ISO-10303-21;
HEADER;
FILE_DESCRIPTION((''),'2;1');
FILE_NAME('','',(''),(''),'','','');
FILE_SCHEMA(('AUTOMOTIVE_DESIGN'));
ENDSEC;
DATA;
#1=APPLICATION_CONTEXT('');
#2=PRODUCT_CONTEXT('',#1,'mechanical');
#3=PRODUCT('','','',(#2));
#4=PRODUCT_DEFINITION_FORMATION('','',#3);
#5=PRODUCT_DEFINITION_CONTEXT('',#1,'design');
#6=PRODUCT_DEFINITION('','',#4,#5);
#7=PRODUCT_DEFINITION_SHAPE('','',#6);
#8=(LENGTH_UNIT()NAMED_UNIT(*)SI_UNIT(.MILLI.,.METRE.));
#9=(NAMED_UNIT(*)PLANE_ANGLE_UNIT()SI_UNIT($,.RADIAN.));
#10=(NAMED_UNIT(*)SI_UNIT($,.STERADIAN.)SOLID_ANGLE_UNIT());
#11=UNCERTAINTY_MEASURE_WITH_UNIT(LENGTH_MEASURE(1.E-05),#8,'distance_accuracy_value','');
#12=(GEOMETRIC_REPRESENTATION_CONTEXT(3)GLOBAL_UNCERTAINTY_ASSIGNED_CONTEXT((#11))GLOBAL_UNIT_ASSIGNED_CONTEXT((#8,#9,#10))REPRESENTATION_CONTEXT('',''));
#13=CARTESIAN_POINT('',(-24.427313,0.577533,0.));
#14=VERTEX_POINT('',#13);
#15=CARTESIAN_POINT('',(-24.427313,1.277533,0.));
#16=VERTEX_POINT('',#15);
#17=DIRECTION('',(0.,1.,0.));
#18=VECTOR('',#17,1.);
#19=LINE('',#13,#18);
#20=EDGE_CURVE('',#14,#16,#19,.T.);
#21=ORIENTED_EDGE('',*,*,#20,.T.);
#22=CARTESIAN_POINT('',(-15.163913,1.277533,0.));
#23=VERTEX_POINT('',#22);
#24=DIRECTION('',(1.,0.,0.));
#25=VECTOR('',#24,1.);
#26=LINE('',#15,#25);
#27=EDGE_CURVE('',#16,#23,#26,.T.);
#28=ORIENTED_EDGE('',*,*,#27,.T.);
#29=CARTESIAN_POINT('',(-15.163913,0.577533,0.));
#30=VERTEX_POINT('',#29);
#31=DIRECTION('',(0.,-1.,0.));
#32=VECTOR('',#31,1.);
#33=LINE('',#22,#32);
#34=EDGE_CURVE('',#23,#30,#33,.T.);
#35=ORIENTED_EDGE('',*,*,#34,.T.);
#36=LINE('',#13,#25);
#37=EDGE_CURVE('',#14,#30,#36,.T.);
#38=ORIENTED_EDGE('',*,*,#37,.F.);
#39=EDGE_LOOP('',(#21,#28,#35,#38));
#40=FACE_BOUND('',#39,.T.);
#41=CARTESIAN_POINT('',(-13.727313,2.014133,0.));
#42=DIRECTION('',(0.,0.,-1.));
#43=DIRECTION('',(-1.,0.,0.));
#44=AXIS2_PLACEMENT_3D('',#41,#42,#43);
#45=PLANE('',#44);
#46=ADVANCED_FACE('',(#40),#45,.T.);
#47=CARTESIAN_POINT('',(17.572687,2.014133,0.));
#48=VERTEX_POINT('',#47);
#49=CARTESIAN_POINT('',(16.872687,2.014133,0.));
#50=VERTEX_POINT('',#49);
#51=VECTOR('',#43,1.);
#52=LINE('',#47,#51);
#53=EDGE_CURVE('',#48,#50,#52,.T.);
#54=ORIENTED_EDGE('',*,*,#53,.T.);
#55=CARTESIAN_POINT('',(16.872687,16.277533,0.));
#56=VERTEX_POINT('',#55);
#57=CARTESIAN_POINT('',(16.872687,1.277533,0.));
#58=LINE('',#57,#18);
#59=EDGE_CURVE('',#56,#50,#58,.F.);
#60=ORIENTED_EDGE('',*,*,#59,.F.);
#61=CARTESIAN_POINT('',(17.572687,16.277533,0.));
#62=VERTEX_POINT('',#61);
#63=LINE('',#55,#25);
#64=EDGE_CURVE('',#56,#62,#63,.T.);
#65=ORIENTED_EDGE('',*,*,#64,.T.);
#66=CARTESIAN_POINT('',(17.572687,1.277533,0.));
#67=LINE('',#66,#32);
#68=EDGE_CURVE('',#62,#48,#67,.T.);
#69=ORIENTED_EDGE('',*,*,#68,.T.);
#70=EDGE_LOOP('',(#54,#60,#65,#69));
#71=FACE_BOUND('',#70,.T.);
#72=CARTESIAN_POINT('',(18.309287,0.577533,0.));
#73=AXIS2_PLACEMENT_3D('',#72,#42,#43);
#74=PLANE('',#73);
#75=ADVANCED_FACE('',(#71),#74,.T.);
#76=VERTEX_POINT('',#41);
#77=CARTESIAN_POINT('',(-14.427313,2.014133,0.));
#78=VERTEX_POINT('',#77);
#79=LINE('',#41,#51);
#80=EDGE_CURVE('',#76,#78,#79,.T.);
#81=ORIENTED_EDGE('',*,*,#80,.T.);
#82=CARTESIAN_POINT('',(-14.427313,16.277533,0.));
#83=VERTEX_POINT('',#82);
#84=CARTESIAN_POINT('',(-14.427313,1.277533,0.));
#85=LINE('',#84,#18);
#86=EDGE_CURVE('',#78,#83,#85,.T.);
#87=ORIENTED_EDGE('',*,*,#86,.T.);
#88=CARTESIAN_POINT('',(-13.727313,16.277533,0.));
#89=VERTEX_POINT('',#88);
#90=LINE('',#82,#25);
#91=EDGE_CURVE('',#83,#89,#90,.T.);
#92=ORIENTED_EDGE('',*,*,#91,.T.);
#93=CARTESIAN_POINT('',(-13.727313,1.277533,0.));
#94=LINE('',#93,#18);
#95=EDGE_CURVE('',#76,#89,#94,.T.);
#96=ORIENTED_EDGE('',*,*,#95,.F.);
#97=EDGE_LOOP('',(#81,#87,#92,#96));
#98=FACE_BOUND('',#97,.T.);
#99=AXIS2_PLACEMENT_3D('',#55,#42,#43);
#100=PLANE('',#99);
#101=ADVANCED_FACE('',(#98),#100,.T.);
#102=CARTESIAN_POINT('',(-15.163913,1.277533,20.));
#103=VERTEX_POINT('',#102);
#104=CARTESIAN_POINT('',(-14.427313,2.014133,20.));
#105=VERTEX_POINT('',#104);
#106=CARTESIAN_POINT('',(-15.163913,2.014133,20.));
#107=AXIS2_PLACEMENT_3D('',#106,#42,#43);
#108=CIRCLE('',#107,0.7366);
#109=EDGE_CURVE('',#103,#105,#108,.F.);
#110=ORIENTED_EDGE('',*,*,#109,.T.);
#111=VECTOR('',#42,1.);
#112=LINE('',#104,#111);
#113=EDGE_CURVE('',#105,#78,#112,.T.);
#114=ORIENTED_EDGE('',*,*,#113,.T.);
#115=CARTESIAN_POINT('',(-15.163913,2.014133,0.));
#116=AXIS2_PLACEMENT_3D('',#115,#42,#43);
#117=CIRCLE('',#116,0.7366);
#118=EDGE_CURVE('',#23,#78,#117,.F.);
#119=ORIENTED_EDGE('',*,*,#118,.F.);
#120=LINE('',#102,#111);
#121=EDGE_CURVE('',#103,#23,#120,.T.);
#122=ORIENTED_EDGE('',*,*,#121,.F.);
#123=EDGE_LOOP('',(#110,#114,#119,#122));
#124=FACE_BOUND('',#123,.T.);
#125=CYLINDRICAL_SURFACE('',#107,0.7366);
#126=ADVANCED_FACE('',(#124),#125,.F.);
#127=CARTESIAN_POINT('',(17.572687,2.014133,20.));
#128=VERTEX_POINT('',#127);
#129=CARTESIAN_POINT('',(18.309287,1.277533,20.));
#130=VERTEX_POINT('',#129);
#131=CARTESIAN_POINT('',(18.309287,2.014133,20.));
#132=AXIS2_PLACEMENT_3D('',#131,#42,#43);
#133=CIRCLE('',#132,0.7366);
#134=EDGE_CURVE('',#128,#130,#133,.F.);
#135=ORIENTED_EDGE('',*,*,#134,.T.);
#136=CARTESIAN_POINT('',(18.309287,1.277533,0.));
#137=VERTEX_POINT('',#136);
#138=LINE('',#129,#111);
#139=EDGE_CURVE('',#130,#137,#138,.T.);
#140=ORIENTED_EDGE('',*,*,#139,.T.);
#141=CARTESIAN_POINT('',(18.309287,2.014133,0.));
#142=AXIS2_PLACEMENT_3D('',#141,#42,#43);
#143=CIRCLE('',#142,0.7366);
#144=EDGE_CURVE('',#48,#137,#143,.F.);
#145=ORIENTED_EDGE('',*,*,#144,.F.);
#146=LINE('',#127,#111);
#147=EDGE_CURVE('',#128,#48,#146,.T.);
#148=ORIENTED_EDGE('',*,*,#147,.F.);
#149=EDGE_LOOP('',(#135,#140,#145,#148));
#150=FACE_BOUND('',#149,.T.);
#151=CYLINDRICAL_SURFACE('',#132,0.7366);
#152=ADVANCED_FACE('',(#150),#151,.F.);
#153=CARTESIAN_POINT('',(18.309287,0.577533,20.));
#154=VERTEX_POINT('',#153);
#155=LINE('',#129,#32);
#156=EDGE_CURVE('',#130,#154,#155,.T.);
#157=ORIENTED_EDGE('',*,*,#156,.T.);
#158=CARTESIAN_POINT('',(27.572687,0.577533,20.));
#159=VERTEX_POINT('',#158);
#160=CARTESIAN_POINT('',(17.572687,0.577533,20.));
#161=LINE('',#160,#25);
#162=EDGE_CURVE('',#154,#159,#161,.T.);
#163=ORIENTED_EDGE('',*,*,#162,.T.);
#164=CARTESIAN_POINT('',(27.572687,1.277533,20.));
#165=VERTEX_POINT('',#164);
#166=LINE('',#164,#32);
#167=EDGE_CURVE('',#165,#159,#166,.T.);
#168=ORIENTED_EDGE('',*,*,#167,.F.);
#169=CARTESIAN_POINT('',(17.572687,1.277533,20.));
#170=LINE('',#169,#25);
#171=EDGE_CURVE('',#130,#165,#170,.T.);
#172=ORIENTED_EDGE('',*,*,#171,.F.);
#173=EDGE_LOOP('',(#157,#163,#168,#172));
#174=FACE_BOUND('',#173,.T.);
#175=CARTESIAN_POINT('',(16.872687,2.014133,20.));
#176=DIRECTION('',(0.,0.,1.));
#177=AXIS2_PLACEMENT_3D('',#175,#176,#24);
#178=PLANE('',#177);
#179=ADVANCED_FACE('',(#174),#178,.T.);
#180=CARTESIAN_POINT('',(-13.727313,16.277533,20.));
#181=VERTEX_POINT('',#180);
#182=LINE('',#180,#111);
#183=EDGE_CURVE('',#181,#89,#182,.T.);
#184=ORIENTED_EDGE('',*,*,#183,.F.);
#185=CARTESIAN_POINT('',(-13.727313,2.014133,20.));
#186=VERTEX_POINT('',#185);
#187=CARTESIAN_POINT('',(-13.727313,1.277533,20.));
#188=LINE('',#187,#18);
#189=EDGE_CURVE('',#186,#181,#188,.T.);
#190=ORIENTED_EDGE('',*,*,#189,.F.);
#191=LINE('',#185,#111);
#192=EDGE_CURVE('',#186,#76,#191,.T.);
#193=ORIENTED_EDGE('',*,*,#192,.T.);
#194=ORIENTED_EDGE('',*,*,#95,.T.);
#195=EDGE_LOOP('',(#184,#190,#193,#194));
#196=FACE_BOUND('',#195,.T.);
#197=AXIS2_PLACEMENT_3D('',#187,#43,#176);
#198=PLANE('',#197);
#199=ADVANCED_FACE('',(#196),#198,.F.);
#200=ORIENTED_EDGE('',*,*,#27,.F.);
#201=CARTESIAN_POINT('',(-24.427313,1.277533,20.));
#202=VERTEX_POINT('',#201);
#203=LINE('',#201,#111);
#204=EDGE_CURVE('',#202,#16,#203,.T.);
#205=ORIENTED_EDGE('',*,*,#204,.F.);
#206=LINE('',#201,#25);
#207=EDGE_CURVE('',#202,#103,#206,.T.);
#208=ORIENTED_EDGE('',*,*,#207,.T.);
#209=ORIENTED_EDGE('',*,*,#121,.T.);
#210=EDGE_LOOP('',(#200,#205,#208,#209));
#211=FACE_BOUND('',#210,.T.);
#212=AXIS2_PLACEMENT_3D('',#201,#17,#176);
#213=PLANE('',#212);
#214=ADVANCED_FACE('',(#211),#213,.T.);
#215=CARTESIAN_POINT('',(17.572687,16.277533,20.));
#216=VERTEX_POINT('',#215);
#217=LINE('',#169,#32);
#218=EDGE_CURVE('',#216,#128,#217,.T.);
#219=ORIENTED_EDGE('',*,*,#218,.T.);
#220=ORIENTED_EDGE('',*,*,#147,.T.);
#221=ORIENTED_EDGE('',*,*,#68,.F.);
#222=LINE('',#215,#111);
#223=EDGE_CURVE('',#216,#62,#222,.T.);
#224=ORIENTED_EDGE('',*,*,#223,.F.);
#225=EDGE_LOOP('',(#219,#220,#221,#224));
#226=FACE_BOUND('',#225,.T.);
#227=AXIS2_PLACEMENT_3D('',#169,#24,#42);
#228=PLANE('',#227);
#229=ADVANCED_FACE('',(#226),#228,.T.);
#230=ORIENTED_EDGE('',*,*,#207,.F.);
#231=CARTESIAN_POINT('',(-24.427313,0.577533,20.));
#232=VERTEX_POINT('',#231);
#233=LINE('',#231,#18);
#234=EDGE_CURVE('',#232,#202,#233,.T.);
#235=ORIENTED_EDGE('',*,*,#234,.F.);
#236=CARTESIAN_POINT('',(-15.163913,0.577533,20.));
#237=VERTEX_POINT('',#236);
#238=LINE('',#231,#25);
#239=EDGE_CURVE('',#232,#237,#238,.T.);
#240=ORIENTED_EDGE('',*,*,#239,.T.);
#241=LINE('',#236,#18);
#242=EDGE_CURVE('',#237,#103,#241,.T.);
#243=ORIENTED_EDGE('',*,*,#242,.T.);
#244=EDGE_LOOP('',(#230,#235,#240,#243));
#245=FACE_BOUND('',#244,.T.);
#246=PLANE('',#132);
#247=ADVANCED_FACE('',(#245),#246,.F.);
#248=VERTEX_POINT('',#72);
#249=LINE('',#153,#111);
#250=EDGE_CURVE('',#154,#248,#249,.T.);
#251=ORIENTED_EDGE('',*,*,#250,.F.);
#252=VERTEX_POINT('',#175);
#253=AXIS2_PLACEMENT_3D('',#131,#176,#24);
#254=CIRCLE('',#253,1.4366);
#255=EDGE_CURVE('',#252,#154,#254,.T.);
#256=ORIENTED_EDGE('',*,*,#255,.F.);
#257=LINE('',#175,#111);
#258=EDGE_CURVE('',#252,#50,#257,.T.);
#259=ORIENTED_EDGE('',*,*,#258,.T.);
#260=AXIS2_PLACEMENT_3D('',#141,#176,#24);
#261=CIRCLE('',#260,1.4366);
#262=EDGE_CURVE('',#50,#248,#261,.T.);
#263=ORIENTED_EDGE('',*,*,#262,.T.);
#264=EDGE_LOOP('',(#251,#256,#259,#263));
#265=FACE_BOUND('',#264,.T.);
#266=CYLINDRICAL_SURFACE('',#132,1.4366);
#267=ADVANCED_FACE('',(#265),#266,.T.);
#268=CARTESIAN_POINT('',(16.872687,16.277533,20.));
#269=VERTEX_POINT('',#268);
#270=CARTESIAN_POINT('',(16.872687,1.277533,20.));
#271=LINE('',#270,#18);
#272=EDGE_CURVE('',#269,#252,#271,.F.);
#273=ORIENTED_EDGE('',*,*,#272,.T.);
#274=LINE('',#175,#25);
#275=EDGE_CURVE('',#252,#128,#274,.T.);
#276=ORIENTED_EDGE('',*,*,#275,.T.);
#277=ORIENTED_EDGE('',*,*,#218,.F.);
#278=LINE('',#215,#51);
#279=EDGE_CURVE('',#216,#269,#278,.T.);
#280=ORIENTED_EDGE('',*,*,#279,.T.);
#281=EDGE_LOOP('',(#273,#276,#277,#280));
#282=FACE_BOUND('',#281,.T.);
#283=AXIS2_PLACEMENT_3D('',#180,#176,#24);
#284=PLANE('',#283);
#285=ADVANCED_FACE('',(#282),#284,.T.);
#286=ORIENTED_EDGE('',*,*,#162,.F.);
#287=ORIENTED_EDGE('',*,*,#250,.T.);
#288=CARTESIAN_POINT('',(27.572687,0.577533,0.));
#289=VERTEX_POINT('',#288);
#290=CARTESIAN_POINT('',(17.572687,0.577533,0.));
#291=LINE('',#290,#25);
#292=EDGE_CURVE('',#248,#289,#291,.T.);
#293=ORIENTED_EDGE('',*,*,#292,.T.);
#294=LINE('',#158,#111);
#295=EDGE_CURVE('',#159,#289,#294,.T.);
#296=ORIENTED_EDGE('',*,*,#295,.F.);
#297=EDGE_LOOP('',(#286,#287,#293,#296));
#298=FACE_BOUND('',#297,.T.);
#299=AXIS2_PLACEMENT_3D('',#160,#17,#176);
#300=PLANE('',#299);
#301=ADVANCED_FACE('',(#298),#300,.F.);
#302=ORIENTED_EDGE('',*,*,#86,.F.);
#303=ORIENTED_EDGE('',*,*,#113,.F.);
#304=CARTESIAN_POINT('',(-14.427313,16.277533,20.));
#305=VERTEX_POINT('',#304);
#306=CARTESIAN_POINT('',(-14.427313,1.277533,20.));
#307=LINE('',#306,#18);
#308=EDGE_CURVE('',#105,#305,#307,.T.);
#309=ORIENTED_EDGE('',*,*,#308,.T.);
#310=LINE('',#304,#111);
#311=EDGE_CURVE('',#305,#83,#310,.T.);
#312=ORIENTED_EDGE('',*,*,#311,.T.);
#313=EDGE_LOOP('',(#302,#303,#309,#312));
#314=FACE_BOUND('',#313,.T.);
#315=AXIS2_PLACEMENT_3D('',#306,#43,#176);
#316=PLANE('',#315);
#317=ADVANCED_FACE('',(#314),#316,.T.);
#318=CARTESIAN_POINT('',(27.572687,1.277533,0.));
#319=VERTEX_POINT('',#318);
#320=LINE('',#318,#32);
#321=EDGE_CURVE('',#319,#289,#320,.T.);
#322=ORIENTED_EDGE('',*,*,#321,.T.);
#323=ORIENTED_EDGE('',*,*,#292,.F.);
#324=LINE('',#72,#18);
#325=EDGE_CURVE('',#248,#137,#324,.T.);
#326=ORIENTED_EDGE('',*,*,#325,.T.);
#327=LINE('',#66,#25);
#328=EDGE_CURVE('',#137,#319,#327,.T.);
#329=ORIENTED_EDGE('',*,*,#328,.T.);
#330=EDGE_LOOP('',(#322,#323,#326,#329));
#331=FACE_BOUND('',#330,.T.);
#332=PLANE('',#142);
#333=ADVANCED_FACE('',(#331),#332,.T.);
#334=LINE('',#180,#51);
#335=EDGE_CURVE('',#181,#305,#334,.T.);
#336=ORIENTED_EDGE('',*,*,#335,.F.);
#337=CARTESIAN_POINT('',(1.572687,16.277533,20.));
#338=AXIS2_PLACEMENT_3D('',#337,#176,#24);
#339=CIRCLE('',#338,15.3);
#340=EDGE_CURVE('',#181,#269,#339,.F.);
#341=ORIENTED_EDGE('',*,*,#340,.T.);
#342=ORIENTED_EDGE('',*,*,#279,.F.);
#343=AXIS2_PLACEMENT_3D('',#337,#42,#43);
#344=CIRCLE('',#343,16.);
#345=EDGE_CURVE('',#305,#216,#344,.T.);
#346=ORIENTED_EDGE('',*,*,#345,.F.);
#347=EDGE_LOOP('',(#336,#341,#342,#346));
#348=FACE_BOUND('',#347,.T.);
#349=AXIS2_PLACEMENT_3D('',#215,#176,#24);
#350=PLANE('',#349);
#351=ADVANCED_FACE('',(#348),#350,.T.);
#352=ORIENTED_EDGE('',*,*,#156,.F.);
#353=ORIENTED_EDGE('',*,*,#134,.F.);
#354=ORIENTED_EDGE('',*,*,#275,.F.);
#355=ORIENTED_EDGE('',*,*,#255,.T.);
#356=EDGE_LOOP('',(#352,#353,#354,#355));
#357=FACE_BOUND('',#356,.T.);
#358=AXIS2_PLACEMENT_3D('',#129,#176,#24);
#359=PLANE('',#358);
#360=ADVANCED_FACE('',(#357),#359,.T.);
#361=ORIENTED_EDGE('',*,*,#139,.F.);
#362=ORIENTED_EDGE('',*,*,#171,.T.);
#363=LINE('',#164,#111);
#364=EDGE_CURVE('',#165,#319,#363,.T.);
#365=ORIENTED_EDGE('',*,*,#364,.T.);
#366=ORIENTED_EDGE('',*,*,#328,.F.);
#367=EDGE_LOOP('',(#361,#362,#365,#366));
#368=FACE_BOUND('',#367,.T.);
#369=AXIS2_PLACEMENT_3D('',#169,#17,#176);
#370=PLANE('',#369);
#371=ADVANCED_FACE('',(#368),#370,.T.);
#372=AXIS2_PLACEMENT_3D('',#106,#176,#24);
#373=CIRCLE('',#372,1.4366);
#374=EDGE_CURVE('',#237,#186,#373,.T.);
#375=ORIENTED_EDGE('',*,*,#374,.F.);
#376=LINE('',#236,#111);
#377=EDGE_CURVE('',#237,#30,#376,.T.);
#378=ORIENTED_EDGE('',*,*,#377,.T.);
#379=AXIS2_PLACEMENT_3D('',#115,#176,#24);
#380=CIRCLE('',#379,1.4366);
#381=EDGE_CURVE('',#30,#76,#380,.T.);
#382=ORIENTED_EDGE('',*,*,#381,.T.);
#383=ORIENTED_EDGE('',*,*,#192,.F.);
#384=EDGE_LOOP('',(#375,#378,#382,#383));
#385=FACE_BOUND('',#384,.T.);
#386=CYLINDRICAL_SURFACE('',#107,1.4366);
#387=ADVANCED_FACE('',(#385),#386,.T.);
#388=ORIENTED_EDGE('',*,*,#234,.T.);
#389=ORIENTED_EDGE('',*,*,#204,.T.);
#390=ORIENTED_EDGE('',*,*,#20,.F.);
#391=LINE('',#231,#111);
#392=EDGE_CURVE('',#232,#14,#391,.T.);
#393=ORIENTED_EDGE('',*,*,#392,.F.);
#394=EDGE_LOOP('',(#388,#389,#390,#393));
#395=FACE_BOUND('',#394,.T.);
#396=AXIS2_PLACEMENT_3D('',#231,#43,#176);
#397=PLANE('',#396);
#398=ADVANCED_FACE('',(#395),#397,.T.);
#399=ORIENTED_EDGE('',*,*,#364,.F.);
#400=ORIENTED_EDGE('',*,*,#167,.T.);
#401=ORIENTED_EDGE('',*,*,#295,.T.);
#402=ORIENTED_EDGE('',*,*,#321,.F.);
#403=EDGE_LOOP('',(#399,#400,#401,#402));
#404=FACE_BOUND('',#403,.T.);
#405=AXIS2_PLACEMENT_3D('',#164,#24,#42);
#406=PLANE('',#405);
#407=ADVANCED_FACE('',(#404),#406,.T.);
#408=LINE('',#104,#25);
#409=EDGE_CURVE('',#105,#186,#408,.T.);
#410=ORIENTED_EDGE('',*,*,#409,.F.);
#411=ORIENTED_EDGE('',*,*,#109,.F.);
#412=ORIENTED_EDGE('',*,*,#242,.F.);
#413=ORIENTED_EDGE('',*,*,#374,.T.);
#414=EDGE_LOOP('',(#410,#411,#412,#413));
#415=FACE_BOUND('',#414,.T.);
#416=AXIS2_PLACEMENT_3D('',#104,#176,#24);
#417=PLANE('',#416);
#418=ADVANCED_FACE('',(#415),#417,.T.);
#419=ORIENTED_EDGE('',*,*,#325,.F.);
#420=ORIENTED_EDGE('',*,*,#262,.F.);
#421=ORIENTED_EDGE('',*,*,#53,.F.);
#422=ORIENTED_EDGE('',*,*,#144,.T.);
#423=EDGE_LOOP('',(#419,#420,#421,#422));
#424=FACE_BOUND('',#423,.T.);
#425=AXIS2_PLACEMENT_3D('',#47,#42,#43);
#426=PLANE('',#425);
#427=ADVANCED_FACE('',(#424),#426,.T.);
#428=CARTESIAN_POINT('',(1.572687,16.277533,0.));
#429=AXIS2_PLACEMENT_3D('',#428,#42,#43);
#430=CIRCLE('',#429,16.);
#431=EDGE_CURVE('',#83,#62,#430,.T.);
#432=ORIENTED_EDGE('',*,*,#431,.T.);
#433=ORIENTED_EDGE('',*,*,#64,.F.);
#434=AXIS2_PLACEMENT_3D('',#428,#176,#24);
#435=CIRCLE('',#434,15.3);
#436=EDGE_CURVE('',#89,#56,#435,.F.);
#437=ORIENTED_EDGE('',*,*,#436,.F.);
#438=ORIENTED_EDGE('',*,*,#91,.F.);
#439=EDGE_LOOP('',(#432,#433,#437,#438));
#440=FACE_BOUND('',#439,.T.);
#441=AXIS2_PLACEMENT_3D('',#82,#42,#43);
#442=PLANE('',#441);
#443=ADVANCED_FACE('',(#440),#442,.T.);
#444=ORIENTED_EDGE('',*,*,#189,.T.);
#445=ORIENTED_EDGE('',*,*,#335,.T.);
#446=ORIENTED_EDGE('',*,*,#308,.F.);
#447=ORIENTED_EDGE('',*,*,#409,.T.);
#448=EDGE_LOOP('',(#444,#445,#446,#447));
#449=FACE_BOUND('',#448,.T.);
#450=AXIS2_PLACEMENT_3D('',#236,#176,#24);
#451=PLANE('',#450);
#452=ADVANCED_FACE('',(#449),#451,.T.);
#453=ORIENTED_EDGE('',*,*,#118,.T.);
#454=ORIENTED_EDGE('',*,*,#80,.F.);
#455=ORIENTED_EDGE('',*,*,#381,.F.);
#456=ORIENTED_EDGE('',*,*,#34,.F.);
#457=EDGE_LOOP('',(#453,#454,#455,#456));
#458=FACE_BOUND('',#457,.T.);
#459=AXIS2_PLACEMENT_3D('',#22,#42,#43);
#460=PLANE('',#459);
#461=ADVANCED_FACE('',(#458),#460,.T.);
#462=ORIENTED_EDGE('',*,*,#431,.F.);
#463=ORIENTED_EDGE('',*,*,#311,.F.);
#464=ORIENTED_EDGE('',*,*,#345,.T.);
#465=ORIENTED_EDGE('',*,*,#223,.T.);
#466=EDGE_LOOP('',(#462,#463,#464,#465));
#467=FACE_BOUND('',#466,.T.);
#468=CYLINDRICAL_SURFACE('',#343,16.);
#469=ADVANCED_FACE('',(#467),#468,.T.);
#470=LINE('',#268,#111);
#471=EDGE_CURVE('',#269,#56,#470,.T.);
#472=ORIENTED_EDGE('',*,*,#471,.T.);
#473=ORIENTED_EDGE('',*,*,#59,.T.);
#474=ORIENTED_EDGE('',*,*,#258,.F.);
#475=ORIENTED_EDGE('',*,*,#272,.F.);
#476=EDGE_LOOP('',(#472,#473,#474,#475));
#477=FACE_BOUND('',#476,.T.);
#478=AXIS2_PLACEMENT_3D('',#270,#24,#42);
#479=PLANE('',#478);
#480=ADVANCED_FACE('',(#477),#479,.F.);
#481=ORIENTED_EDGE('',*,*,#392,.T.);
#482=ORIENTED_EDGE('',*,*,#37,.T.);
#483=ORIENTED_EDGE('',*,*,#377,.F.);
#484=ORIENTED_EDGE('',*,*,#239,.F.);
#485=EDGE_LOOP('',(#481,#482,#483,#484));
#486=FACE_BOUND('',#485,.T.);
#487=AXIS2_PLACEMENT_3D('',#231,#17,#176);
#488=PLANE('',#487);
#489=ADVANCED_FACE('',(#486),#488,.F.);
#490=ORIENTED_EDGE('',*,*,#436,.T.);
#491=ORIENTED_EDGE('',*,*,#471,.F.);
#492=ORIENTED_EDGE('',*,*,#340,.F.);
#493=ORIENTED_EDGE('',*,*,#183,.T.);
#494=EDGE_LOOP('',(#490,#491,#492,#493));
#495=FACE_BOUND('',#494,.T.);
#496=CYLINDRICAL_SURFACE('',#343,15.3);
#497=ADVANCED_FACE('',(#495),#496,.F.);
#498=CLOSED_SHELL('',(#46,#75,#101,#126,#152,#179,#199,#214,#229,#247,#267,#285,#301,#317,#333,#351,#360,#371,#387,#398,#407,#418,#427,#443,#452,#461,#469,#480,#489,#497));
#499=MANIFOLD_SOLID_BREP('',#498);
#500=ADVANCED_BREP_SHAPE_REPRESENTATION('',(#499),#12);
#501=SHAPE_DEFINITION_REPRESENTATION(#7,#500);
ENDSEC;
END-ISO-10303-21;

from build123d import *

# Parameters (mm, degrees)
BASE_FLANGE1_DEPTH = 20


# Sheet-metal steps are written as plain solids
with BuildPart() as part:
    # Base-Flange1: sheet metal written as solids
    # Sketch1 → Base-Flange1 (new body)
    with BuildSketch(Plane.XY):
        with BuildLine():
            Line((-24.427312775, 1.27753304), (-15.163912775, 1.27753304))
            ThreePointArc((-15.163912775, 1.27753304), (-14.64305792, 1.493278185), (-14.427312775, 2.01413304))
            Line((-14.427312775, 2.01413304), (-14.427312775, 16.27753304))
            ThreePointArc((-14.427312775, 16.27753304), (1.572687225, 32.27753304), (17.572687225, 16.27753304))
            Line((17.572687225, 16.27753304), (17.572687225, 2.01413304))
            ThreePointArc((17.572687225, 2.01413304), (17.78843237, 1.493278185), (18.309287225, 1.27753304))
            Line((18.309287225, 1.27753304), (27.572687225, 1.27753304))
            Line((27.572687225, 1.27753304), (27.572687225, 0.57753304))
            Line((27.572687225, 0.57753304), (18.309287225, 0.57753304))
            ThreePointArc((18.309287225, 0.57753304), (17.293457623, 0.998303438), (16.872687225, 2.01413304))
            Line((16.872687225, 2.01413304), (16.872687225, 16.27753304))
            ThreePointArc((16.872687225, 16.27753304), (1.572687225, 31.57753304), (-13.727312775, 16.27753304))
            Line((-13.727312775, 16.27753304), (-13.727312775, 2.01413304))
            ThreePointArc((-13.727312775, 2.01413304), (-14.148083173, 0.998303438), (-15.163912775, 0.57753304))
            Line((-15.163912775, 0.57753304), (-24.427312775, 0.57753304))
            Line((-24.427312775, 0.57753304), (-24.427312775, 1.27753304))
        make_face()
    extrude(amount=BASE_FLANGE1_DEPTH)


solid = part.part
